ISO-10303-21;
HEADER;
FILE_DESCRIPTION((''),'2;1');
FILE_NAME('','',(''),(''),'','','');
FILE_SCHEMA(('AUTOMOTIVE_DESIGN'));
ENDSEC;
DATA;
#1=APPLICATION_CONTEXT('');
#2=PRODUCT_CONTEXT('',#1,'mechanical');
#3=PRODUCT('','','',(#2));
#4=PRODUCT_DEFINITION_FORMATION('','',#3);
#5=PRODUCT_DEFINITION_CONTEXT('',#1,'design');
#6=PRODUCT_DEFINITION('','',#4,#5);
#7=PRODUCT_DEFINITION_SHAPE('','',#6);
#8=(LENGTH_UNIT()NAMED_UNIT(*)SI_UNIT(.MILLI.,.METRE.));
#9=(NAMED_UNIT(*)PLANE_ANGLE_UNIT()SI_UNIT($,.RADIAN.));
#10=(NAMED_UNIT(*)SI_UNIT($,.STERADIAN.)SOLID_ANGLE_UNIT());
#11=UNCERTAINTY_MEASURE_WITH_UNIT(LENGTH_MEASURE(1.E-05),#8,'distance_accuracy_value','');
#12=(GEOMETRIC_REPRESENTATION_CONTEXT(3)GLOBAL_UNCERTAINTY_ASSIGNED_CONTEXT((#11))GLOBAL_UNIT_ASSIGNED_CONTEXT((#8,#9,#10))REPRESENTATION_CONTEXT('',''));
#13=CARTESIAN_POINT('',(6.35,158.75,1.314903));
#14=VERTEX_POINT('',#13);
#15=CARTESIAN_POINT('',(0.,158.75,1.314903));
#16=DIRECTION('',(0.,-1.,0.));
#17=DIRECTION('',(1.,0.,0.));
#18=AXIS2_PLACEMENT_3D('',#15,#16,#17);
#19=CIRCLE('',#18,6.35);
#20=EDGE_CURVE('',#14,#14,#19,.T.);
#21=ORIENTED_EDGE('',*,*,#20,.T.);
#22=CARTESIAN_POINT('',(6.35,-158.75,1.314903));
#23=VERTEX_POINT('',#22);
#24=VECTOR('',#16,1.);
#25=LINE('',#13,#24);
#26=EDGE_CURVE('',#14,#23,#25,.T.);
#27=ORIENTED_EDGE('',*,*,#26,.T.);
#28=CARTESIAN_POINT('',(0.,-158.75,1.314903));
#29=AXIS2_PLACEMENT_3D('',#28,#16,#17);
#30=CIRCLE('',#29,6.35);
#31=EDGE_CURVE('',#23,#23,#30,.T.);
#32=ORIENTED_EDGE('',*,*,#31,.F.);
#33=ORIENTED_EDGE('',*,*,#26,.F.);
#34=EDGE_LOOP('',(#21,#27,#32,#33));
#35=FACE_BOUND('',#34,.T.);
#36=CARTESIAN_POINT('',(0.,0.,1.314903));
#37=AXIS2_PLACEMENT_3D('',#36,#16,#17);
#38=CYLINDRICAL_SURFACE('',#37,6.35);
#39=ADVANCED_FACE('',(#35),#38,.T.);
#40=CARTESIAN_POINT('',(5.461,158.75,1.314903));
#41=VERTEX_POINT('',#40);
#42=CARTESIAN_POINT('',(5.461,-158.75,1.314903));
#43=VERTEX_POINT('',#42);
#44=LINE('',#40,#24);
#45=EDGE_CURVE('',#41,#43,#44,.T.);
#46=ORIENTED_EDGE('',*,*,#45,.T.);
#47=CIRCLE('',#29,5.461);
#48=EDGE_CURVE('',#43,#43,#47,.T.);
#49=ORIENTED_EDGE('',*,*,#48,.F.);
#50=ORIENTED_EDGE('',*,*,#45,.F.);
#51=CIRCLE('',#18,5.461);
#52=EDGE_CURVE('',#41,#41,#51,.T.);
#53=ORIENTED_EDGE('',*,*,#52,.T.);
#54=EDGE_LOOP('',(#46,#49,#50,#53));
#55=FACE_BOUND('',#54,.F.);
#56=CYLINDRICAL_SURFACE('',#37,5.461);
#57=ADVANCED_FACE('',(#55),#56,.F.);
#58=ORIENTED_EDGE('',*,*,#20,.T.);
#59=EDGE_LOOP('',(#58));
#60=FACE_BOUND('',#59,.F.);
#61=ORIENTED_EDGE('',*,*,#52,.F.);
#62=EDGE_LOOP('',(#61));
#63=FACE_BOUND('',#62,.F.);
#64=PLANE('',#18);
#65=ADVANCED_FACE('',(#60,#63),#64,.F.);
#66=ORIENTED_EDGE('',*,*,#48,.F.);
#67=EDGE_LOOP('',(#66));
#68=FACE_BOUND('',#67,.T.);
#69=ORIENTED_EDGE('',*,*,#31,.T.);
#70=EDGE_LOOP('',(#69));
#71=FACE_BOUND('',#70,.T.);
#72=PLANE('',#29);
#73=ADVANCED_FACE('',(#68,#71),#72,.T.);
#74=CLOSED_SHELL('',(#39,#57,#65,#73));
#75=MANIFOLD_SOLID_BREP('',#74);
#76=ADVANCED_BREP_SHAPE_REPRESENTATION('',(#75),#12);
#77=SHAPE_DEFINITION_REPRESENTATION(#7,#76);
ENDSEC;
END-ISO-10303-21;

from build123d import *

# Parameters (mm, degrees)
F0_R     = 6.35
F1_DEPTH = 158.75
F2_T     = -0.889


with BuildPart() as f1:
    # F0 (on Front) → F1 (new body, symmetric)
    with BuildSketch(Plane.XZ):
        with Locations((0, 1.314903493)):
            Circle(F0_R)
    extrude(amount=F1_DEPTH, both=True)

    # F2
    f2_openings = [f1.faces().sort_by_distance(p)[0] for p in [
        (0, -158.75, 1.314903),
        (0, 158.75, 1.314903),
    ]]
    offset(amount=F2_T, openings=f2_openings)


solid = f1.part
